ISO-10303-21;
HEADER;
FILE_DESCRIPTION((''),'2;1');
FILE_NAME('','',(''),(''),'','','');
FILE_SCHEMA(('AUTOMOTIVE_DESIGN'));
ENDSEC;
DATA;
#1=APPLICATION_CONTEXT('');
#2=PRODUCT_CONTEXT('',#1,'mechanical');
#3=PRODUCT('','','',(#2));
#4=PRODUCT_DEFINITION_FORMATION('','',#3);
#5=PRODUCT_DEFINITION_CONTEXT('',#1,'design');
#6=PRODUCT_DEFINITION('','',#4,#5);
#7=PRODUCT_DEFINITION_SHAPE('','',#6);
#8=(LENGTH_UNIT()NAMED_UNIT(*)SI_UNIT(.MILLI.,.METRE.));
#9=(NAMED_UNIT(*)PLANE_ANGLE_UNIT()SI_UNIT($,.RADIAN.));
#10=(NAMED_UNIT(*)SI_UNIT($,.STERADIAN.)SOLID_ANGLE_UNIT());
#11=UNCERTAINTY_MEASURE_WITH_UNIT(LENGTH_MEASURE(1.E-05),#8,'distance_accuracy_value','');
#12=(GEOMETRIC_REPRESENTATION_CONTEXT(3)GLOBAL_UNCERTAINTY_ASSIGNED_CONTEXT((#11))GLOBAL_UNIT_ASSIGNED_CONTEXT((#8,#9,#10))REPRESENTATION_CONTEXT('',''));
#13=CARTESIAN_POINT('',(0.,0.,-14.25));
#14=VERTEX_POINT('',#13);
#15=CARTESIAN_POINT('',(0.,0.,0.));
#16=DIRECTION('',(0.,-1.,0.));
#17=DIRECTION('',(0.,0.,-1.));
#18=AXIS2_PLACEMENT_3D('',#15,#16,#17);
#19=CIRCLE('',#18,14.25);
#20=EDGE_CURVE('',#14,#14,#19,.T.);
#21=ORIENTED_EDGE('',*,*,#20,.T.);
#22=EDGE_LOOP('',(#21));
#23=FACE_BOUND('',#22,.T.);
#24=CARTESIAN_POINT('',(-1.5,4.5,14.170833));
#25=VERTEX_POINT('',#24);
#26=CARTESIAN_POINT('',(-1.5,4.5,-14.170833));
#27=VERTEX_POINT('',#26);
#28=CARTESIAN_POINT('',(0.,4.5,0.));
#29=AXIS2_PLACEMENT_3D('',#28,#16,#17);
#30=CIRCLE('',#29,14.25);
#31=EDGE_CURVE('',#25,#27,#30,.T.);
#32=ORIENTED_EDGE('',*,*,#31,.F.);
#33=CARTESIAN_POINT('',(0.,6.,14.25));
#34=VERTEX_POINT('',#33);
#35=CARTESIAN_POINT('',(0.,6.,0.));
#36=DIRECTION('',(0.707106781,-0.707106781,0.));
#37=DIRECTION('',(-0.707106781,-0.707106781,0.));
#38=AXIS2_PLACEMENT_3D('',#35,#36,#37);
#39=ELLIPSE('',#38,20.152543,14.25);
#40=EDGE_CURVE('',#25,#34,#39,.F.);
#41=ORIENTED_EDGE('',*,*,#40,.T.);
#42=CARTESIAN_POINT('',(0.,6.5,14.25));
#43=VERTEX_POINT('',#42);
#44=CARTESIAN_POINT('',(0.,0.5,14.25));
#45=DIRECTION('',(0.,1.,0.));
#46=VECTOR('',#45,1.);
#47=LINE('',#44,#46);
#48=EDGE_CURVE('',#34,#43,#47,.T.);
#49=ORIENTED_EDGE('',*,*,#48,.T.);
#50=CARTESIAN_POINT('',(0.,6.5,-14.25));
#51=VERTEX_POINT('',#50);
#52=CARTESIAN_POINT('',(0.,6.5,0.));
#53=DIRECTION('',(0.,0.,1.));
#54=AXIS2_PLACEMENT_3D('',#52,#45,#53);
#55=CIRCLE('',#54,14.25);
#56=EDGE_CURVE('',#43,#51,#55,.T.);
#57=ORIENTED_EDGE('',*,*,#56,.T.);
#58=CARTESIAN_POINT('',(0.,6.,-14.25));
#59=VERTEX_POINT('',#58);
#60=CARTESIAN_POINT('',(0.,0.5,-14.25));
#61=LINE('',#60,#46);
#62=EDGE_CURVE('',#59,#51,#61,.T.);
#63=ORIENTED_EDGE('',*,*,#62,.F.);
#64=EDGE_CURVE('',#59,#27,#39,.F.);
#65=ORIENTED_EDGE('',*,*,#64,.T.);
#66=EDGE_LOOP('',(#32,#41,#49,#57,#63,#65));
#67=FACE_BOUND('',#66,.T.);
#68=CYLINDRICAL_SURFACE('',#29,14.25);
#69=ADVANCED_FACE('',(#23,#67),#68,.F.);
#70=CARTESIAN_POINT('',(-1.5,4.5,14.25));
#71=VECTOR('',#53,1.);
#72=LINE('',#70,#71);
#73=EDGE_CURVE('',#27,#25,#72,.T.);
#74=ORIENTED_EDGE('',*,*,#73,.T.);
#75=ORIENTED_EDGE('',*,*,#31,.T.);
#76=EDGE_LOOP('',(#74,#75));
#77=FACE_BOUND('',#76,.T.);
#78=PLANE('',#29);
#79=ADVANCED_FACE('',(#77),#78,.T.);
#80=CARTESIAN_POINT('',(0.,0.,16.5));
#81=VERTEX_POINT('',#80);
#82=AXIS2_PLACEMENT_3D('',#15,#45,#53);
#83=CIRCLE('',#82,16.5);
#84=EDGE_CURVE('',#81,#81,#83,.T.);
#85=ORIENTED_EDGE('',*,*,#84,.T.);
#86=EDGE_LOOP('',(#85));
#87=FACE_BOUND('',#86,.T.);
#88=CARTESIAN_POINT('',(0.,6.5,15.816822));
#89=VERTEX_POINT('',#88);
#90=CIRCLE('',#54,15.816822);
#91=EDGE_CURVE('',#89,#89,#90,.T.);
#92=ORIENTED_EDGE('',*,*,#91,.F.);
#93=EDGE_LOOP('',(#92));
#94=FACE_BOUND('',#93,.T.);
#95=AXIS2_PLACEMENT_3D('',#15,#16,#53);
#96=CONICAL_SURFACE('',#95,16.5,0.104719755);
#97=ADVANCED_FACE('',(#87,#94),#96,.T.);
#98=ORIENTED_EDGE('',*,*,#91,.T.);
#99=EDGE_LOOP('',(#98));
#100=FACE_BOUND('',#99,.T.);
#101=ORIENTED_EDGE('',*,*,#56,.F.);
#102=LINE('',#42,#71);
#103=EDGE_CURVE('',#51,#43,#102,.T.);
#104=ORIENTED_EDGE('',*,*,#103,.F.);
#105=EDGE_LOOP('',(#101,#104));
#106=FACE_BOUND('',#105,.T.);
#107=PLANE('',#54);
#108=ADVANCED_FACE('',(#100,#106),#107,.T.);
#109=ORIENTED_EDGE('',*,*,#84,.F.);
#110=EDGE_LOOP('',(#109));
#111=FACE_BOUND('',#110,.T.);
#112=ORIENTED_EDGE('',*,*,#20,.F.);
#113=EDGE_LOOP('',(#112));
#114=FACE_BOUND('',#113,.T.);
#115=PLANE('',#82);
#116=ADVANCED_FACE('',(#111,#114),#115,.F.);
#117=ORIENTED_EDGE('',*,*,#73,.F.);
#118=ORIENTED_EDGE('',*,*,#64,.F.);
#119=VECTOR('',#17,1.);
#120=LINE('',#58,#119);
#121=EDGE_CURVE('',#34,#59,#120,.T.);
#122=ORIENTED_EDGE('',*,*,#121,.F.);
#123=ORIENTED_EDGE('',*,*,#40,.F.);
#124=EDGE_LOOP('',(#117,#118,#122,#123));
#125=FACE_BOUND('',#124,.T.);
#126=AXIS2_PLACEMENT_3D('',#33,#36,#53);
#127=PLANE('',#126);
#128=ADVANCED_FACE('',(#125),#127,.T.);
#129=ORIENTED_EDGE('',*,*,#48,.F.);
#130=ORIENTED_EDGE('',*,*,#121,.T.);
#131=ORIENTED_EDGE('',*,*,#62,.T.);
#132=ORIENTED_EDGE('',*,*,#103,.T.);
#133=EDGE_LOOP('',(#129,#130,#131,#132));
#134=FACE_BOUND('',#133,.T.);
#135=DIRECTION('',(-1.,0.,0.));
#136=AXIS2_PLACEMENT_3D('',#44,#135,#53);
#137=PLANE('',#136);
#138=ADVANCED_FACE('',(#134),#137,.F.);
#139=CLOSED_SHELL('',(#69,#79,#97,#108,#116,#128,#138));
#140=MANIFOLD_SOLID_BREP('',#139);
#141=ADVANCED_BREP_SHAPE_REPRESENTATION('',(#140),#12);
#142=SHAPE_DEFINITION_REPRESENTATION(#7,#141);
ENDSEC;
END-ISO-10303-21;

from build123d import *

# Parameters (mm, degrees)
SKETCH1_R           = 16.5
BOSS_EXTRUDE1_DEPTH = 6.5
BOSS_EXTRUDE1_TAPER = 6
SKETCH2_R           = 14.25
CUT_EXTRUDE1_DEPTH  = 4.5
CUT_EXTRUDE2_START  = -6
CUT_EXTRUDE2_DEPTH  = 6
CHAMFER1_SIZE       = 1.5


with BuildPart() as part:
    # Sketch1 → Boss-Extrude1 (new body)
    with BuildSketch(Plane(origin=(0, 0, 0), x_dir=(1, 0, 0), z_dir=(0, 1, 0))):
        Circle(SKETCH1_R)
    extrude(amount=BOSS_EXTRUDE1_DEPTH, taper=BOSS_EXTRUDE1_TAPER)

    # Sketch2 → Cut-Extrude1 (cut)
    with BuildSketch(Plane.XZ):
        with Locations(Location((0, 0, 0), (0, 0, 270))):
            Circle(SKETCH2_R)
    extrude(amount=-CUT_EXTRUDE1_DEPTH, mode=Mode.SUBTRACT)

    # Sketch3 → Cut-Extrude2 (cut)
    with BuildSketch(Plane(origin=(0, 6.5, 0), x_dir=(1, 0, 0), z_dir=(0, 1, 0)).offset(CUT_EXTRUDE2_START)):
        with BuildLine():
            Line((0, -14.25), (0, 14.25))
            ThreePointArc((0, 14.25), (14.25, 0), (0, -14.25))
        make_face()
    extrude(amount=CUT_EXTRUDE2_DEPTH, mode=Mode.SUBTRACT)

    # Chamfer1
    # the kernel refuses this chamfer: 1.5 mm, written as the material it takes off along each edge
    with BuildSketch(Plane(origin=(0, 4.5, 18.107524482), x_dir=(0.027495876610586376, 0.9996219169112968, 0), z_dir=(0, 0, -1))) as chamfer1_piece_1_section:
        Polygon((CHAMFER1_SIZE * 0.999621916911, -CHAMFER1_SIZE * 0.0274958766106), (-CHAMFER1_SIZE * 0.0274958766106, -CHAMFER1_SIZE * 0.999621916911), (0, 0), align=None)
    chamfer1_piece_1 = extrude(amount=36.215048964, mode=Mode.PRIVATE)
    chamfer1_piece_1 = chamfer1_piece_1 & Plane(origin=(0, 5.000185137, 0), x_dir=(0, 0, -1), z_dir=(0, -1, 0)) * Cylinder(14.25, 79, mode=Mode.PRIVATE)
    add(chamfer1_piece_1, mode=Mode.SUBTRACT)


solid = part.part
